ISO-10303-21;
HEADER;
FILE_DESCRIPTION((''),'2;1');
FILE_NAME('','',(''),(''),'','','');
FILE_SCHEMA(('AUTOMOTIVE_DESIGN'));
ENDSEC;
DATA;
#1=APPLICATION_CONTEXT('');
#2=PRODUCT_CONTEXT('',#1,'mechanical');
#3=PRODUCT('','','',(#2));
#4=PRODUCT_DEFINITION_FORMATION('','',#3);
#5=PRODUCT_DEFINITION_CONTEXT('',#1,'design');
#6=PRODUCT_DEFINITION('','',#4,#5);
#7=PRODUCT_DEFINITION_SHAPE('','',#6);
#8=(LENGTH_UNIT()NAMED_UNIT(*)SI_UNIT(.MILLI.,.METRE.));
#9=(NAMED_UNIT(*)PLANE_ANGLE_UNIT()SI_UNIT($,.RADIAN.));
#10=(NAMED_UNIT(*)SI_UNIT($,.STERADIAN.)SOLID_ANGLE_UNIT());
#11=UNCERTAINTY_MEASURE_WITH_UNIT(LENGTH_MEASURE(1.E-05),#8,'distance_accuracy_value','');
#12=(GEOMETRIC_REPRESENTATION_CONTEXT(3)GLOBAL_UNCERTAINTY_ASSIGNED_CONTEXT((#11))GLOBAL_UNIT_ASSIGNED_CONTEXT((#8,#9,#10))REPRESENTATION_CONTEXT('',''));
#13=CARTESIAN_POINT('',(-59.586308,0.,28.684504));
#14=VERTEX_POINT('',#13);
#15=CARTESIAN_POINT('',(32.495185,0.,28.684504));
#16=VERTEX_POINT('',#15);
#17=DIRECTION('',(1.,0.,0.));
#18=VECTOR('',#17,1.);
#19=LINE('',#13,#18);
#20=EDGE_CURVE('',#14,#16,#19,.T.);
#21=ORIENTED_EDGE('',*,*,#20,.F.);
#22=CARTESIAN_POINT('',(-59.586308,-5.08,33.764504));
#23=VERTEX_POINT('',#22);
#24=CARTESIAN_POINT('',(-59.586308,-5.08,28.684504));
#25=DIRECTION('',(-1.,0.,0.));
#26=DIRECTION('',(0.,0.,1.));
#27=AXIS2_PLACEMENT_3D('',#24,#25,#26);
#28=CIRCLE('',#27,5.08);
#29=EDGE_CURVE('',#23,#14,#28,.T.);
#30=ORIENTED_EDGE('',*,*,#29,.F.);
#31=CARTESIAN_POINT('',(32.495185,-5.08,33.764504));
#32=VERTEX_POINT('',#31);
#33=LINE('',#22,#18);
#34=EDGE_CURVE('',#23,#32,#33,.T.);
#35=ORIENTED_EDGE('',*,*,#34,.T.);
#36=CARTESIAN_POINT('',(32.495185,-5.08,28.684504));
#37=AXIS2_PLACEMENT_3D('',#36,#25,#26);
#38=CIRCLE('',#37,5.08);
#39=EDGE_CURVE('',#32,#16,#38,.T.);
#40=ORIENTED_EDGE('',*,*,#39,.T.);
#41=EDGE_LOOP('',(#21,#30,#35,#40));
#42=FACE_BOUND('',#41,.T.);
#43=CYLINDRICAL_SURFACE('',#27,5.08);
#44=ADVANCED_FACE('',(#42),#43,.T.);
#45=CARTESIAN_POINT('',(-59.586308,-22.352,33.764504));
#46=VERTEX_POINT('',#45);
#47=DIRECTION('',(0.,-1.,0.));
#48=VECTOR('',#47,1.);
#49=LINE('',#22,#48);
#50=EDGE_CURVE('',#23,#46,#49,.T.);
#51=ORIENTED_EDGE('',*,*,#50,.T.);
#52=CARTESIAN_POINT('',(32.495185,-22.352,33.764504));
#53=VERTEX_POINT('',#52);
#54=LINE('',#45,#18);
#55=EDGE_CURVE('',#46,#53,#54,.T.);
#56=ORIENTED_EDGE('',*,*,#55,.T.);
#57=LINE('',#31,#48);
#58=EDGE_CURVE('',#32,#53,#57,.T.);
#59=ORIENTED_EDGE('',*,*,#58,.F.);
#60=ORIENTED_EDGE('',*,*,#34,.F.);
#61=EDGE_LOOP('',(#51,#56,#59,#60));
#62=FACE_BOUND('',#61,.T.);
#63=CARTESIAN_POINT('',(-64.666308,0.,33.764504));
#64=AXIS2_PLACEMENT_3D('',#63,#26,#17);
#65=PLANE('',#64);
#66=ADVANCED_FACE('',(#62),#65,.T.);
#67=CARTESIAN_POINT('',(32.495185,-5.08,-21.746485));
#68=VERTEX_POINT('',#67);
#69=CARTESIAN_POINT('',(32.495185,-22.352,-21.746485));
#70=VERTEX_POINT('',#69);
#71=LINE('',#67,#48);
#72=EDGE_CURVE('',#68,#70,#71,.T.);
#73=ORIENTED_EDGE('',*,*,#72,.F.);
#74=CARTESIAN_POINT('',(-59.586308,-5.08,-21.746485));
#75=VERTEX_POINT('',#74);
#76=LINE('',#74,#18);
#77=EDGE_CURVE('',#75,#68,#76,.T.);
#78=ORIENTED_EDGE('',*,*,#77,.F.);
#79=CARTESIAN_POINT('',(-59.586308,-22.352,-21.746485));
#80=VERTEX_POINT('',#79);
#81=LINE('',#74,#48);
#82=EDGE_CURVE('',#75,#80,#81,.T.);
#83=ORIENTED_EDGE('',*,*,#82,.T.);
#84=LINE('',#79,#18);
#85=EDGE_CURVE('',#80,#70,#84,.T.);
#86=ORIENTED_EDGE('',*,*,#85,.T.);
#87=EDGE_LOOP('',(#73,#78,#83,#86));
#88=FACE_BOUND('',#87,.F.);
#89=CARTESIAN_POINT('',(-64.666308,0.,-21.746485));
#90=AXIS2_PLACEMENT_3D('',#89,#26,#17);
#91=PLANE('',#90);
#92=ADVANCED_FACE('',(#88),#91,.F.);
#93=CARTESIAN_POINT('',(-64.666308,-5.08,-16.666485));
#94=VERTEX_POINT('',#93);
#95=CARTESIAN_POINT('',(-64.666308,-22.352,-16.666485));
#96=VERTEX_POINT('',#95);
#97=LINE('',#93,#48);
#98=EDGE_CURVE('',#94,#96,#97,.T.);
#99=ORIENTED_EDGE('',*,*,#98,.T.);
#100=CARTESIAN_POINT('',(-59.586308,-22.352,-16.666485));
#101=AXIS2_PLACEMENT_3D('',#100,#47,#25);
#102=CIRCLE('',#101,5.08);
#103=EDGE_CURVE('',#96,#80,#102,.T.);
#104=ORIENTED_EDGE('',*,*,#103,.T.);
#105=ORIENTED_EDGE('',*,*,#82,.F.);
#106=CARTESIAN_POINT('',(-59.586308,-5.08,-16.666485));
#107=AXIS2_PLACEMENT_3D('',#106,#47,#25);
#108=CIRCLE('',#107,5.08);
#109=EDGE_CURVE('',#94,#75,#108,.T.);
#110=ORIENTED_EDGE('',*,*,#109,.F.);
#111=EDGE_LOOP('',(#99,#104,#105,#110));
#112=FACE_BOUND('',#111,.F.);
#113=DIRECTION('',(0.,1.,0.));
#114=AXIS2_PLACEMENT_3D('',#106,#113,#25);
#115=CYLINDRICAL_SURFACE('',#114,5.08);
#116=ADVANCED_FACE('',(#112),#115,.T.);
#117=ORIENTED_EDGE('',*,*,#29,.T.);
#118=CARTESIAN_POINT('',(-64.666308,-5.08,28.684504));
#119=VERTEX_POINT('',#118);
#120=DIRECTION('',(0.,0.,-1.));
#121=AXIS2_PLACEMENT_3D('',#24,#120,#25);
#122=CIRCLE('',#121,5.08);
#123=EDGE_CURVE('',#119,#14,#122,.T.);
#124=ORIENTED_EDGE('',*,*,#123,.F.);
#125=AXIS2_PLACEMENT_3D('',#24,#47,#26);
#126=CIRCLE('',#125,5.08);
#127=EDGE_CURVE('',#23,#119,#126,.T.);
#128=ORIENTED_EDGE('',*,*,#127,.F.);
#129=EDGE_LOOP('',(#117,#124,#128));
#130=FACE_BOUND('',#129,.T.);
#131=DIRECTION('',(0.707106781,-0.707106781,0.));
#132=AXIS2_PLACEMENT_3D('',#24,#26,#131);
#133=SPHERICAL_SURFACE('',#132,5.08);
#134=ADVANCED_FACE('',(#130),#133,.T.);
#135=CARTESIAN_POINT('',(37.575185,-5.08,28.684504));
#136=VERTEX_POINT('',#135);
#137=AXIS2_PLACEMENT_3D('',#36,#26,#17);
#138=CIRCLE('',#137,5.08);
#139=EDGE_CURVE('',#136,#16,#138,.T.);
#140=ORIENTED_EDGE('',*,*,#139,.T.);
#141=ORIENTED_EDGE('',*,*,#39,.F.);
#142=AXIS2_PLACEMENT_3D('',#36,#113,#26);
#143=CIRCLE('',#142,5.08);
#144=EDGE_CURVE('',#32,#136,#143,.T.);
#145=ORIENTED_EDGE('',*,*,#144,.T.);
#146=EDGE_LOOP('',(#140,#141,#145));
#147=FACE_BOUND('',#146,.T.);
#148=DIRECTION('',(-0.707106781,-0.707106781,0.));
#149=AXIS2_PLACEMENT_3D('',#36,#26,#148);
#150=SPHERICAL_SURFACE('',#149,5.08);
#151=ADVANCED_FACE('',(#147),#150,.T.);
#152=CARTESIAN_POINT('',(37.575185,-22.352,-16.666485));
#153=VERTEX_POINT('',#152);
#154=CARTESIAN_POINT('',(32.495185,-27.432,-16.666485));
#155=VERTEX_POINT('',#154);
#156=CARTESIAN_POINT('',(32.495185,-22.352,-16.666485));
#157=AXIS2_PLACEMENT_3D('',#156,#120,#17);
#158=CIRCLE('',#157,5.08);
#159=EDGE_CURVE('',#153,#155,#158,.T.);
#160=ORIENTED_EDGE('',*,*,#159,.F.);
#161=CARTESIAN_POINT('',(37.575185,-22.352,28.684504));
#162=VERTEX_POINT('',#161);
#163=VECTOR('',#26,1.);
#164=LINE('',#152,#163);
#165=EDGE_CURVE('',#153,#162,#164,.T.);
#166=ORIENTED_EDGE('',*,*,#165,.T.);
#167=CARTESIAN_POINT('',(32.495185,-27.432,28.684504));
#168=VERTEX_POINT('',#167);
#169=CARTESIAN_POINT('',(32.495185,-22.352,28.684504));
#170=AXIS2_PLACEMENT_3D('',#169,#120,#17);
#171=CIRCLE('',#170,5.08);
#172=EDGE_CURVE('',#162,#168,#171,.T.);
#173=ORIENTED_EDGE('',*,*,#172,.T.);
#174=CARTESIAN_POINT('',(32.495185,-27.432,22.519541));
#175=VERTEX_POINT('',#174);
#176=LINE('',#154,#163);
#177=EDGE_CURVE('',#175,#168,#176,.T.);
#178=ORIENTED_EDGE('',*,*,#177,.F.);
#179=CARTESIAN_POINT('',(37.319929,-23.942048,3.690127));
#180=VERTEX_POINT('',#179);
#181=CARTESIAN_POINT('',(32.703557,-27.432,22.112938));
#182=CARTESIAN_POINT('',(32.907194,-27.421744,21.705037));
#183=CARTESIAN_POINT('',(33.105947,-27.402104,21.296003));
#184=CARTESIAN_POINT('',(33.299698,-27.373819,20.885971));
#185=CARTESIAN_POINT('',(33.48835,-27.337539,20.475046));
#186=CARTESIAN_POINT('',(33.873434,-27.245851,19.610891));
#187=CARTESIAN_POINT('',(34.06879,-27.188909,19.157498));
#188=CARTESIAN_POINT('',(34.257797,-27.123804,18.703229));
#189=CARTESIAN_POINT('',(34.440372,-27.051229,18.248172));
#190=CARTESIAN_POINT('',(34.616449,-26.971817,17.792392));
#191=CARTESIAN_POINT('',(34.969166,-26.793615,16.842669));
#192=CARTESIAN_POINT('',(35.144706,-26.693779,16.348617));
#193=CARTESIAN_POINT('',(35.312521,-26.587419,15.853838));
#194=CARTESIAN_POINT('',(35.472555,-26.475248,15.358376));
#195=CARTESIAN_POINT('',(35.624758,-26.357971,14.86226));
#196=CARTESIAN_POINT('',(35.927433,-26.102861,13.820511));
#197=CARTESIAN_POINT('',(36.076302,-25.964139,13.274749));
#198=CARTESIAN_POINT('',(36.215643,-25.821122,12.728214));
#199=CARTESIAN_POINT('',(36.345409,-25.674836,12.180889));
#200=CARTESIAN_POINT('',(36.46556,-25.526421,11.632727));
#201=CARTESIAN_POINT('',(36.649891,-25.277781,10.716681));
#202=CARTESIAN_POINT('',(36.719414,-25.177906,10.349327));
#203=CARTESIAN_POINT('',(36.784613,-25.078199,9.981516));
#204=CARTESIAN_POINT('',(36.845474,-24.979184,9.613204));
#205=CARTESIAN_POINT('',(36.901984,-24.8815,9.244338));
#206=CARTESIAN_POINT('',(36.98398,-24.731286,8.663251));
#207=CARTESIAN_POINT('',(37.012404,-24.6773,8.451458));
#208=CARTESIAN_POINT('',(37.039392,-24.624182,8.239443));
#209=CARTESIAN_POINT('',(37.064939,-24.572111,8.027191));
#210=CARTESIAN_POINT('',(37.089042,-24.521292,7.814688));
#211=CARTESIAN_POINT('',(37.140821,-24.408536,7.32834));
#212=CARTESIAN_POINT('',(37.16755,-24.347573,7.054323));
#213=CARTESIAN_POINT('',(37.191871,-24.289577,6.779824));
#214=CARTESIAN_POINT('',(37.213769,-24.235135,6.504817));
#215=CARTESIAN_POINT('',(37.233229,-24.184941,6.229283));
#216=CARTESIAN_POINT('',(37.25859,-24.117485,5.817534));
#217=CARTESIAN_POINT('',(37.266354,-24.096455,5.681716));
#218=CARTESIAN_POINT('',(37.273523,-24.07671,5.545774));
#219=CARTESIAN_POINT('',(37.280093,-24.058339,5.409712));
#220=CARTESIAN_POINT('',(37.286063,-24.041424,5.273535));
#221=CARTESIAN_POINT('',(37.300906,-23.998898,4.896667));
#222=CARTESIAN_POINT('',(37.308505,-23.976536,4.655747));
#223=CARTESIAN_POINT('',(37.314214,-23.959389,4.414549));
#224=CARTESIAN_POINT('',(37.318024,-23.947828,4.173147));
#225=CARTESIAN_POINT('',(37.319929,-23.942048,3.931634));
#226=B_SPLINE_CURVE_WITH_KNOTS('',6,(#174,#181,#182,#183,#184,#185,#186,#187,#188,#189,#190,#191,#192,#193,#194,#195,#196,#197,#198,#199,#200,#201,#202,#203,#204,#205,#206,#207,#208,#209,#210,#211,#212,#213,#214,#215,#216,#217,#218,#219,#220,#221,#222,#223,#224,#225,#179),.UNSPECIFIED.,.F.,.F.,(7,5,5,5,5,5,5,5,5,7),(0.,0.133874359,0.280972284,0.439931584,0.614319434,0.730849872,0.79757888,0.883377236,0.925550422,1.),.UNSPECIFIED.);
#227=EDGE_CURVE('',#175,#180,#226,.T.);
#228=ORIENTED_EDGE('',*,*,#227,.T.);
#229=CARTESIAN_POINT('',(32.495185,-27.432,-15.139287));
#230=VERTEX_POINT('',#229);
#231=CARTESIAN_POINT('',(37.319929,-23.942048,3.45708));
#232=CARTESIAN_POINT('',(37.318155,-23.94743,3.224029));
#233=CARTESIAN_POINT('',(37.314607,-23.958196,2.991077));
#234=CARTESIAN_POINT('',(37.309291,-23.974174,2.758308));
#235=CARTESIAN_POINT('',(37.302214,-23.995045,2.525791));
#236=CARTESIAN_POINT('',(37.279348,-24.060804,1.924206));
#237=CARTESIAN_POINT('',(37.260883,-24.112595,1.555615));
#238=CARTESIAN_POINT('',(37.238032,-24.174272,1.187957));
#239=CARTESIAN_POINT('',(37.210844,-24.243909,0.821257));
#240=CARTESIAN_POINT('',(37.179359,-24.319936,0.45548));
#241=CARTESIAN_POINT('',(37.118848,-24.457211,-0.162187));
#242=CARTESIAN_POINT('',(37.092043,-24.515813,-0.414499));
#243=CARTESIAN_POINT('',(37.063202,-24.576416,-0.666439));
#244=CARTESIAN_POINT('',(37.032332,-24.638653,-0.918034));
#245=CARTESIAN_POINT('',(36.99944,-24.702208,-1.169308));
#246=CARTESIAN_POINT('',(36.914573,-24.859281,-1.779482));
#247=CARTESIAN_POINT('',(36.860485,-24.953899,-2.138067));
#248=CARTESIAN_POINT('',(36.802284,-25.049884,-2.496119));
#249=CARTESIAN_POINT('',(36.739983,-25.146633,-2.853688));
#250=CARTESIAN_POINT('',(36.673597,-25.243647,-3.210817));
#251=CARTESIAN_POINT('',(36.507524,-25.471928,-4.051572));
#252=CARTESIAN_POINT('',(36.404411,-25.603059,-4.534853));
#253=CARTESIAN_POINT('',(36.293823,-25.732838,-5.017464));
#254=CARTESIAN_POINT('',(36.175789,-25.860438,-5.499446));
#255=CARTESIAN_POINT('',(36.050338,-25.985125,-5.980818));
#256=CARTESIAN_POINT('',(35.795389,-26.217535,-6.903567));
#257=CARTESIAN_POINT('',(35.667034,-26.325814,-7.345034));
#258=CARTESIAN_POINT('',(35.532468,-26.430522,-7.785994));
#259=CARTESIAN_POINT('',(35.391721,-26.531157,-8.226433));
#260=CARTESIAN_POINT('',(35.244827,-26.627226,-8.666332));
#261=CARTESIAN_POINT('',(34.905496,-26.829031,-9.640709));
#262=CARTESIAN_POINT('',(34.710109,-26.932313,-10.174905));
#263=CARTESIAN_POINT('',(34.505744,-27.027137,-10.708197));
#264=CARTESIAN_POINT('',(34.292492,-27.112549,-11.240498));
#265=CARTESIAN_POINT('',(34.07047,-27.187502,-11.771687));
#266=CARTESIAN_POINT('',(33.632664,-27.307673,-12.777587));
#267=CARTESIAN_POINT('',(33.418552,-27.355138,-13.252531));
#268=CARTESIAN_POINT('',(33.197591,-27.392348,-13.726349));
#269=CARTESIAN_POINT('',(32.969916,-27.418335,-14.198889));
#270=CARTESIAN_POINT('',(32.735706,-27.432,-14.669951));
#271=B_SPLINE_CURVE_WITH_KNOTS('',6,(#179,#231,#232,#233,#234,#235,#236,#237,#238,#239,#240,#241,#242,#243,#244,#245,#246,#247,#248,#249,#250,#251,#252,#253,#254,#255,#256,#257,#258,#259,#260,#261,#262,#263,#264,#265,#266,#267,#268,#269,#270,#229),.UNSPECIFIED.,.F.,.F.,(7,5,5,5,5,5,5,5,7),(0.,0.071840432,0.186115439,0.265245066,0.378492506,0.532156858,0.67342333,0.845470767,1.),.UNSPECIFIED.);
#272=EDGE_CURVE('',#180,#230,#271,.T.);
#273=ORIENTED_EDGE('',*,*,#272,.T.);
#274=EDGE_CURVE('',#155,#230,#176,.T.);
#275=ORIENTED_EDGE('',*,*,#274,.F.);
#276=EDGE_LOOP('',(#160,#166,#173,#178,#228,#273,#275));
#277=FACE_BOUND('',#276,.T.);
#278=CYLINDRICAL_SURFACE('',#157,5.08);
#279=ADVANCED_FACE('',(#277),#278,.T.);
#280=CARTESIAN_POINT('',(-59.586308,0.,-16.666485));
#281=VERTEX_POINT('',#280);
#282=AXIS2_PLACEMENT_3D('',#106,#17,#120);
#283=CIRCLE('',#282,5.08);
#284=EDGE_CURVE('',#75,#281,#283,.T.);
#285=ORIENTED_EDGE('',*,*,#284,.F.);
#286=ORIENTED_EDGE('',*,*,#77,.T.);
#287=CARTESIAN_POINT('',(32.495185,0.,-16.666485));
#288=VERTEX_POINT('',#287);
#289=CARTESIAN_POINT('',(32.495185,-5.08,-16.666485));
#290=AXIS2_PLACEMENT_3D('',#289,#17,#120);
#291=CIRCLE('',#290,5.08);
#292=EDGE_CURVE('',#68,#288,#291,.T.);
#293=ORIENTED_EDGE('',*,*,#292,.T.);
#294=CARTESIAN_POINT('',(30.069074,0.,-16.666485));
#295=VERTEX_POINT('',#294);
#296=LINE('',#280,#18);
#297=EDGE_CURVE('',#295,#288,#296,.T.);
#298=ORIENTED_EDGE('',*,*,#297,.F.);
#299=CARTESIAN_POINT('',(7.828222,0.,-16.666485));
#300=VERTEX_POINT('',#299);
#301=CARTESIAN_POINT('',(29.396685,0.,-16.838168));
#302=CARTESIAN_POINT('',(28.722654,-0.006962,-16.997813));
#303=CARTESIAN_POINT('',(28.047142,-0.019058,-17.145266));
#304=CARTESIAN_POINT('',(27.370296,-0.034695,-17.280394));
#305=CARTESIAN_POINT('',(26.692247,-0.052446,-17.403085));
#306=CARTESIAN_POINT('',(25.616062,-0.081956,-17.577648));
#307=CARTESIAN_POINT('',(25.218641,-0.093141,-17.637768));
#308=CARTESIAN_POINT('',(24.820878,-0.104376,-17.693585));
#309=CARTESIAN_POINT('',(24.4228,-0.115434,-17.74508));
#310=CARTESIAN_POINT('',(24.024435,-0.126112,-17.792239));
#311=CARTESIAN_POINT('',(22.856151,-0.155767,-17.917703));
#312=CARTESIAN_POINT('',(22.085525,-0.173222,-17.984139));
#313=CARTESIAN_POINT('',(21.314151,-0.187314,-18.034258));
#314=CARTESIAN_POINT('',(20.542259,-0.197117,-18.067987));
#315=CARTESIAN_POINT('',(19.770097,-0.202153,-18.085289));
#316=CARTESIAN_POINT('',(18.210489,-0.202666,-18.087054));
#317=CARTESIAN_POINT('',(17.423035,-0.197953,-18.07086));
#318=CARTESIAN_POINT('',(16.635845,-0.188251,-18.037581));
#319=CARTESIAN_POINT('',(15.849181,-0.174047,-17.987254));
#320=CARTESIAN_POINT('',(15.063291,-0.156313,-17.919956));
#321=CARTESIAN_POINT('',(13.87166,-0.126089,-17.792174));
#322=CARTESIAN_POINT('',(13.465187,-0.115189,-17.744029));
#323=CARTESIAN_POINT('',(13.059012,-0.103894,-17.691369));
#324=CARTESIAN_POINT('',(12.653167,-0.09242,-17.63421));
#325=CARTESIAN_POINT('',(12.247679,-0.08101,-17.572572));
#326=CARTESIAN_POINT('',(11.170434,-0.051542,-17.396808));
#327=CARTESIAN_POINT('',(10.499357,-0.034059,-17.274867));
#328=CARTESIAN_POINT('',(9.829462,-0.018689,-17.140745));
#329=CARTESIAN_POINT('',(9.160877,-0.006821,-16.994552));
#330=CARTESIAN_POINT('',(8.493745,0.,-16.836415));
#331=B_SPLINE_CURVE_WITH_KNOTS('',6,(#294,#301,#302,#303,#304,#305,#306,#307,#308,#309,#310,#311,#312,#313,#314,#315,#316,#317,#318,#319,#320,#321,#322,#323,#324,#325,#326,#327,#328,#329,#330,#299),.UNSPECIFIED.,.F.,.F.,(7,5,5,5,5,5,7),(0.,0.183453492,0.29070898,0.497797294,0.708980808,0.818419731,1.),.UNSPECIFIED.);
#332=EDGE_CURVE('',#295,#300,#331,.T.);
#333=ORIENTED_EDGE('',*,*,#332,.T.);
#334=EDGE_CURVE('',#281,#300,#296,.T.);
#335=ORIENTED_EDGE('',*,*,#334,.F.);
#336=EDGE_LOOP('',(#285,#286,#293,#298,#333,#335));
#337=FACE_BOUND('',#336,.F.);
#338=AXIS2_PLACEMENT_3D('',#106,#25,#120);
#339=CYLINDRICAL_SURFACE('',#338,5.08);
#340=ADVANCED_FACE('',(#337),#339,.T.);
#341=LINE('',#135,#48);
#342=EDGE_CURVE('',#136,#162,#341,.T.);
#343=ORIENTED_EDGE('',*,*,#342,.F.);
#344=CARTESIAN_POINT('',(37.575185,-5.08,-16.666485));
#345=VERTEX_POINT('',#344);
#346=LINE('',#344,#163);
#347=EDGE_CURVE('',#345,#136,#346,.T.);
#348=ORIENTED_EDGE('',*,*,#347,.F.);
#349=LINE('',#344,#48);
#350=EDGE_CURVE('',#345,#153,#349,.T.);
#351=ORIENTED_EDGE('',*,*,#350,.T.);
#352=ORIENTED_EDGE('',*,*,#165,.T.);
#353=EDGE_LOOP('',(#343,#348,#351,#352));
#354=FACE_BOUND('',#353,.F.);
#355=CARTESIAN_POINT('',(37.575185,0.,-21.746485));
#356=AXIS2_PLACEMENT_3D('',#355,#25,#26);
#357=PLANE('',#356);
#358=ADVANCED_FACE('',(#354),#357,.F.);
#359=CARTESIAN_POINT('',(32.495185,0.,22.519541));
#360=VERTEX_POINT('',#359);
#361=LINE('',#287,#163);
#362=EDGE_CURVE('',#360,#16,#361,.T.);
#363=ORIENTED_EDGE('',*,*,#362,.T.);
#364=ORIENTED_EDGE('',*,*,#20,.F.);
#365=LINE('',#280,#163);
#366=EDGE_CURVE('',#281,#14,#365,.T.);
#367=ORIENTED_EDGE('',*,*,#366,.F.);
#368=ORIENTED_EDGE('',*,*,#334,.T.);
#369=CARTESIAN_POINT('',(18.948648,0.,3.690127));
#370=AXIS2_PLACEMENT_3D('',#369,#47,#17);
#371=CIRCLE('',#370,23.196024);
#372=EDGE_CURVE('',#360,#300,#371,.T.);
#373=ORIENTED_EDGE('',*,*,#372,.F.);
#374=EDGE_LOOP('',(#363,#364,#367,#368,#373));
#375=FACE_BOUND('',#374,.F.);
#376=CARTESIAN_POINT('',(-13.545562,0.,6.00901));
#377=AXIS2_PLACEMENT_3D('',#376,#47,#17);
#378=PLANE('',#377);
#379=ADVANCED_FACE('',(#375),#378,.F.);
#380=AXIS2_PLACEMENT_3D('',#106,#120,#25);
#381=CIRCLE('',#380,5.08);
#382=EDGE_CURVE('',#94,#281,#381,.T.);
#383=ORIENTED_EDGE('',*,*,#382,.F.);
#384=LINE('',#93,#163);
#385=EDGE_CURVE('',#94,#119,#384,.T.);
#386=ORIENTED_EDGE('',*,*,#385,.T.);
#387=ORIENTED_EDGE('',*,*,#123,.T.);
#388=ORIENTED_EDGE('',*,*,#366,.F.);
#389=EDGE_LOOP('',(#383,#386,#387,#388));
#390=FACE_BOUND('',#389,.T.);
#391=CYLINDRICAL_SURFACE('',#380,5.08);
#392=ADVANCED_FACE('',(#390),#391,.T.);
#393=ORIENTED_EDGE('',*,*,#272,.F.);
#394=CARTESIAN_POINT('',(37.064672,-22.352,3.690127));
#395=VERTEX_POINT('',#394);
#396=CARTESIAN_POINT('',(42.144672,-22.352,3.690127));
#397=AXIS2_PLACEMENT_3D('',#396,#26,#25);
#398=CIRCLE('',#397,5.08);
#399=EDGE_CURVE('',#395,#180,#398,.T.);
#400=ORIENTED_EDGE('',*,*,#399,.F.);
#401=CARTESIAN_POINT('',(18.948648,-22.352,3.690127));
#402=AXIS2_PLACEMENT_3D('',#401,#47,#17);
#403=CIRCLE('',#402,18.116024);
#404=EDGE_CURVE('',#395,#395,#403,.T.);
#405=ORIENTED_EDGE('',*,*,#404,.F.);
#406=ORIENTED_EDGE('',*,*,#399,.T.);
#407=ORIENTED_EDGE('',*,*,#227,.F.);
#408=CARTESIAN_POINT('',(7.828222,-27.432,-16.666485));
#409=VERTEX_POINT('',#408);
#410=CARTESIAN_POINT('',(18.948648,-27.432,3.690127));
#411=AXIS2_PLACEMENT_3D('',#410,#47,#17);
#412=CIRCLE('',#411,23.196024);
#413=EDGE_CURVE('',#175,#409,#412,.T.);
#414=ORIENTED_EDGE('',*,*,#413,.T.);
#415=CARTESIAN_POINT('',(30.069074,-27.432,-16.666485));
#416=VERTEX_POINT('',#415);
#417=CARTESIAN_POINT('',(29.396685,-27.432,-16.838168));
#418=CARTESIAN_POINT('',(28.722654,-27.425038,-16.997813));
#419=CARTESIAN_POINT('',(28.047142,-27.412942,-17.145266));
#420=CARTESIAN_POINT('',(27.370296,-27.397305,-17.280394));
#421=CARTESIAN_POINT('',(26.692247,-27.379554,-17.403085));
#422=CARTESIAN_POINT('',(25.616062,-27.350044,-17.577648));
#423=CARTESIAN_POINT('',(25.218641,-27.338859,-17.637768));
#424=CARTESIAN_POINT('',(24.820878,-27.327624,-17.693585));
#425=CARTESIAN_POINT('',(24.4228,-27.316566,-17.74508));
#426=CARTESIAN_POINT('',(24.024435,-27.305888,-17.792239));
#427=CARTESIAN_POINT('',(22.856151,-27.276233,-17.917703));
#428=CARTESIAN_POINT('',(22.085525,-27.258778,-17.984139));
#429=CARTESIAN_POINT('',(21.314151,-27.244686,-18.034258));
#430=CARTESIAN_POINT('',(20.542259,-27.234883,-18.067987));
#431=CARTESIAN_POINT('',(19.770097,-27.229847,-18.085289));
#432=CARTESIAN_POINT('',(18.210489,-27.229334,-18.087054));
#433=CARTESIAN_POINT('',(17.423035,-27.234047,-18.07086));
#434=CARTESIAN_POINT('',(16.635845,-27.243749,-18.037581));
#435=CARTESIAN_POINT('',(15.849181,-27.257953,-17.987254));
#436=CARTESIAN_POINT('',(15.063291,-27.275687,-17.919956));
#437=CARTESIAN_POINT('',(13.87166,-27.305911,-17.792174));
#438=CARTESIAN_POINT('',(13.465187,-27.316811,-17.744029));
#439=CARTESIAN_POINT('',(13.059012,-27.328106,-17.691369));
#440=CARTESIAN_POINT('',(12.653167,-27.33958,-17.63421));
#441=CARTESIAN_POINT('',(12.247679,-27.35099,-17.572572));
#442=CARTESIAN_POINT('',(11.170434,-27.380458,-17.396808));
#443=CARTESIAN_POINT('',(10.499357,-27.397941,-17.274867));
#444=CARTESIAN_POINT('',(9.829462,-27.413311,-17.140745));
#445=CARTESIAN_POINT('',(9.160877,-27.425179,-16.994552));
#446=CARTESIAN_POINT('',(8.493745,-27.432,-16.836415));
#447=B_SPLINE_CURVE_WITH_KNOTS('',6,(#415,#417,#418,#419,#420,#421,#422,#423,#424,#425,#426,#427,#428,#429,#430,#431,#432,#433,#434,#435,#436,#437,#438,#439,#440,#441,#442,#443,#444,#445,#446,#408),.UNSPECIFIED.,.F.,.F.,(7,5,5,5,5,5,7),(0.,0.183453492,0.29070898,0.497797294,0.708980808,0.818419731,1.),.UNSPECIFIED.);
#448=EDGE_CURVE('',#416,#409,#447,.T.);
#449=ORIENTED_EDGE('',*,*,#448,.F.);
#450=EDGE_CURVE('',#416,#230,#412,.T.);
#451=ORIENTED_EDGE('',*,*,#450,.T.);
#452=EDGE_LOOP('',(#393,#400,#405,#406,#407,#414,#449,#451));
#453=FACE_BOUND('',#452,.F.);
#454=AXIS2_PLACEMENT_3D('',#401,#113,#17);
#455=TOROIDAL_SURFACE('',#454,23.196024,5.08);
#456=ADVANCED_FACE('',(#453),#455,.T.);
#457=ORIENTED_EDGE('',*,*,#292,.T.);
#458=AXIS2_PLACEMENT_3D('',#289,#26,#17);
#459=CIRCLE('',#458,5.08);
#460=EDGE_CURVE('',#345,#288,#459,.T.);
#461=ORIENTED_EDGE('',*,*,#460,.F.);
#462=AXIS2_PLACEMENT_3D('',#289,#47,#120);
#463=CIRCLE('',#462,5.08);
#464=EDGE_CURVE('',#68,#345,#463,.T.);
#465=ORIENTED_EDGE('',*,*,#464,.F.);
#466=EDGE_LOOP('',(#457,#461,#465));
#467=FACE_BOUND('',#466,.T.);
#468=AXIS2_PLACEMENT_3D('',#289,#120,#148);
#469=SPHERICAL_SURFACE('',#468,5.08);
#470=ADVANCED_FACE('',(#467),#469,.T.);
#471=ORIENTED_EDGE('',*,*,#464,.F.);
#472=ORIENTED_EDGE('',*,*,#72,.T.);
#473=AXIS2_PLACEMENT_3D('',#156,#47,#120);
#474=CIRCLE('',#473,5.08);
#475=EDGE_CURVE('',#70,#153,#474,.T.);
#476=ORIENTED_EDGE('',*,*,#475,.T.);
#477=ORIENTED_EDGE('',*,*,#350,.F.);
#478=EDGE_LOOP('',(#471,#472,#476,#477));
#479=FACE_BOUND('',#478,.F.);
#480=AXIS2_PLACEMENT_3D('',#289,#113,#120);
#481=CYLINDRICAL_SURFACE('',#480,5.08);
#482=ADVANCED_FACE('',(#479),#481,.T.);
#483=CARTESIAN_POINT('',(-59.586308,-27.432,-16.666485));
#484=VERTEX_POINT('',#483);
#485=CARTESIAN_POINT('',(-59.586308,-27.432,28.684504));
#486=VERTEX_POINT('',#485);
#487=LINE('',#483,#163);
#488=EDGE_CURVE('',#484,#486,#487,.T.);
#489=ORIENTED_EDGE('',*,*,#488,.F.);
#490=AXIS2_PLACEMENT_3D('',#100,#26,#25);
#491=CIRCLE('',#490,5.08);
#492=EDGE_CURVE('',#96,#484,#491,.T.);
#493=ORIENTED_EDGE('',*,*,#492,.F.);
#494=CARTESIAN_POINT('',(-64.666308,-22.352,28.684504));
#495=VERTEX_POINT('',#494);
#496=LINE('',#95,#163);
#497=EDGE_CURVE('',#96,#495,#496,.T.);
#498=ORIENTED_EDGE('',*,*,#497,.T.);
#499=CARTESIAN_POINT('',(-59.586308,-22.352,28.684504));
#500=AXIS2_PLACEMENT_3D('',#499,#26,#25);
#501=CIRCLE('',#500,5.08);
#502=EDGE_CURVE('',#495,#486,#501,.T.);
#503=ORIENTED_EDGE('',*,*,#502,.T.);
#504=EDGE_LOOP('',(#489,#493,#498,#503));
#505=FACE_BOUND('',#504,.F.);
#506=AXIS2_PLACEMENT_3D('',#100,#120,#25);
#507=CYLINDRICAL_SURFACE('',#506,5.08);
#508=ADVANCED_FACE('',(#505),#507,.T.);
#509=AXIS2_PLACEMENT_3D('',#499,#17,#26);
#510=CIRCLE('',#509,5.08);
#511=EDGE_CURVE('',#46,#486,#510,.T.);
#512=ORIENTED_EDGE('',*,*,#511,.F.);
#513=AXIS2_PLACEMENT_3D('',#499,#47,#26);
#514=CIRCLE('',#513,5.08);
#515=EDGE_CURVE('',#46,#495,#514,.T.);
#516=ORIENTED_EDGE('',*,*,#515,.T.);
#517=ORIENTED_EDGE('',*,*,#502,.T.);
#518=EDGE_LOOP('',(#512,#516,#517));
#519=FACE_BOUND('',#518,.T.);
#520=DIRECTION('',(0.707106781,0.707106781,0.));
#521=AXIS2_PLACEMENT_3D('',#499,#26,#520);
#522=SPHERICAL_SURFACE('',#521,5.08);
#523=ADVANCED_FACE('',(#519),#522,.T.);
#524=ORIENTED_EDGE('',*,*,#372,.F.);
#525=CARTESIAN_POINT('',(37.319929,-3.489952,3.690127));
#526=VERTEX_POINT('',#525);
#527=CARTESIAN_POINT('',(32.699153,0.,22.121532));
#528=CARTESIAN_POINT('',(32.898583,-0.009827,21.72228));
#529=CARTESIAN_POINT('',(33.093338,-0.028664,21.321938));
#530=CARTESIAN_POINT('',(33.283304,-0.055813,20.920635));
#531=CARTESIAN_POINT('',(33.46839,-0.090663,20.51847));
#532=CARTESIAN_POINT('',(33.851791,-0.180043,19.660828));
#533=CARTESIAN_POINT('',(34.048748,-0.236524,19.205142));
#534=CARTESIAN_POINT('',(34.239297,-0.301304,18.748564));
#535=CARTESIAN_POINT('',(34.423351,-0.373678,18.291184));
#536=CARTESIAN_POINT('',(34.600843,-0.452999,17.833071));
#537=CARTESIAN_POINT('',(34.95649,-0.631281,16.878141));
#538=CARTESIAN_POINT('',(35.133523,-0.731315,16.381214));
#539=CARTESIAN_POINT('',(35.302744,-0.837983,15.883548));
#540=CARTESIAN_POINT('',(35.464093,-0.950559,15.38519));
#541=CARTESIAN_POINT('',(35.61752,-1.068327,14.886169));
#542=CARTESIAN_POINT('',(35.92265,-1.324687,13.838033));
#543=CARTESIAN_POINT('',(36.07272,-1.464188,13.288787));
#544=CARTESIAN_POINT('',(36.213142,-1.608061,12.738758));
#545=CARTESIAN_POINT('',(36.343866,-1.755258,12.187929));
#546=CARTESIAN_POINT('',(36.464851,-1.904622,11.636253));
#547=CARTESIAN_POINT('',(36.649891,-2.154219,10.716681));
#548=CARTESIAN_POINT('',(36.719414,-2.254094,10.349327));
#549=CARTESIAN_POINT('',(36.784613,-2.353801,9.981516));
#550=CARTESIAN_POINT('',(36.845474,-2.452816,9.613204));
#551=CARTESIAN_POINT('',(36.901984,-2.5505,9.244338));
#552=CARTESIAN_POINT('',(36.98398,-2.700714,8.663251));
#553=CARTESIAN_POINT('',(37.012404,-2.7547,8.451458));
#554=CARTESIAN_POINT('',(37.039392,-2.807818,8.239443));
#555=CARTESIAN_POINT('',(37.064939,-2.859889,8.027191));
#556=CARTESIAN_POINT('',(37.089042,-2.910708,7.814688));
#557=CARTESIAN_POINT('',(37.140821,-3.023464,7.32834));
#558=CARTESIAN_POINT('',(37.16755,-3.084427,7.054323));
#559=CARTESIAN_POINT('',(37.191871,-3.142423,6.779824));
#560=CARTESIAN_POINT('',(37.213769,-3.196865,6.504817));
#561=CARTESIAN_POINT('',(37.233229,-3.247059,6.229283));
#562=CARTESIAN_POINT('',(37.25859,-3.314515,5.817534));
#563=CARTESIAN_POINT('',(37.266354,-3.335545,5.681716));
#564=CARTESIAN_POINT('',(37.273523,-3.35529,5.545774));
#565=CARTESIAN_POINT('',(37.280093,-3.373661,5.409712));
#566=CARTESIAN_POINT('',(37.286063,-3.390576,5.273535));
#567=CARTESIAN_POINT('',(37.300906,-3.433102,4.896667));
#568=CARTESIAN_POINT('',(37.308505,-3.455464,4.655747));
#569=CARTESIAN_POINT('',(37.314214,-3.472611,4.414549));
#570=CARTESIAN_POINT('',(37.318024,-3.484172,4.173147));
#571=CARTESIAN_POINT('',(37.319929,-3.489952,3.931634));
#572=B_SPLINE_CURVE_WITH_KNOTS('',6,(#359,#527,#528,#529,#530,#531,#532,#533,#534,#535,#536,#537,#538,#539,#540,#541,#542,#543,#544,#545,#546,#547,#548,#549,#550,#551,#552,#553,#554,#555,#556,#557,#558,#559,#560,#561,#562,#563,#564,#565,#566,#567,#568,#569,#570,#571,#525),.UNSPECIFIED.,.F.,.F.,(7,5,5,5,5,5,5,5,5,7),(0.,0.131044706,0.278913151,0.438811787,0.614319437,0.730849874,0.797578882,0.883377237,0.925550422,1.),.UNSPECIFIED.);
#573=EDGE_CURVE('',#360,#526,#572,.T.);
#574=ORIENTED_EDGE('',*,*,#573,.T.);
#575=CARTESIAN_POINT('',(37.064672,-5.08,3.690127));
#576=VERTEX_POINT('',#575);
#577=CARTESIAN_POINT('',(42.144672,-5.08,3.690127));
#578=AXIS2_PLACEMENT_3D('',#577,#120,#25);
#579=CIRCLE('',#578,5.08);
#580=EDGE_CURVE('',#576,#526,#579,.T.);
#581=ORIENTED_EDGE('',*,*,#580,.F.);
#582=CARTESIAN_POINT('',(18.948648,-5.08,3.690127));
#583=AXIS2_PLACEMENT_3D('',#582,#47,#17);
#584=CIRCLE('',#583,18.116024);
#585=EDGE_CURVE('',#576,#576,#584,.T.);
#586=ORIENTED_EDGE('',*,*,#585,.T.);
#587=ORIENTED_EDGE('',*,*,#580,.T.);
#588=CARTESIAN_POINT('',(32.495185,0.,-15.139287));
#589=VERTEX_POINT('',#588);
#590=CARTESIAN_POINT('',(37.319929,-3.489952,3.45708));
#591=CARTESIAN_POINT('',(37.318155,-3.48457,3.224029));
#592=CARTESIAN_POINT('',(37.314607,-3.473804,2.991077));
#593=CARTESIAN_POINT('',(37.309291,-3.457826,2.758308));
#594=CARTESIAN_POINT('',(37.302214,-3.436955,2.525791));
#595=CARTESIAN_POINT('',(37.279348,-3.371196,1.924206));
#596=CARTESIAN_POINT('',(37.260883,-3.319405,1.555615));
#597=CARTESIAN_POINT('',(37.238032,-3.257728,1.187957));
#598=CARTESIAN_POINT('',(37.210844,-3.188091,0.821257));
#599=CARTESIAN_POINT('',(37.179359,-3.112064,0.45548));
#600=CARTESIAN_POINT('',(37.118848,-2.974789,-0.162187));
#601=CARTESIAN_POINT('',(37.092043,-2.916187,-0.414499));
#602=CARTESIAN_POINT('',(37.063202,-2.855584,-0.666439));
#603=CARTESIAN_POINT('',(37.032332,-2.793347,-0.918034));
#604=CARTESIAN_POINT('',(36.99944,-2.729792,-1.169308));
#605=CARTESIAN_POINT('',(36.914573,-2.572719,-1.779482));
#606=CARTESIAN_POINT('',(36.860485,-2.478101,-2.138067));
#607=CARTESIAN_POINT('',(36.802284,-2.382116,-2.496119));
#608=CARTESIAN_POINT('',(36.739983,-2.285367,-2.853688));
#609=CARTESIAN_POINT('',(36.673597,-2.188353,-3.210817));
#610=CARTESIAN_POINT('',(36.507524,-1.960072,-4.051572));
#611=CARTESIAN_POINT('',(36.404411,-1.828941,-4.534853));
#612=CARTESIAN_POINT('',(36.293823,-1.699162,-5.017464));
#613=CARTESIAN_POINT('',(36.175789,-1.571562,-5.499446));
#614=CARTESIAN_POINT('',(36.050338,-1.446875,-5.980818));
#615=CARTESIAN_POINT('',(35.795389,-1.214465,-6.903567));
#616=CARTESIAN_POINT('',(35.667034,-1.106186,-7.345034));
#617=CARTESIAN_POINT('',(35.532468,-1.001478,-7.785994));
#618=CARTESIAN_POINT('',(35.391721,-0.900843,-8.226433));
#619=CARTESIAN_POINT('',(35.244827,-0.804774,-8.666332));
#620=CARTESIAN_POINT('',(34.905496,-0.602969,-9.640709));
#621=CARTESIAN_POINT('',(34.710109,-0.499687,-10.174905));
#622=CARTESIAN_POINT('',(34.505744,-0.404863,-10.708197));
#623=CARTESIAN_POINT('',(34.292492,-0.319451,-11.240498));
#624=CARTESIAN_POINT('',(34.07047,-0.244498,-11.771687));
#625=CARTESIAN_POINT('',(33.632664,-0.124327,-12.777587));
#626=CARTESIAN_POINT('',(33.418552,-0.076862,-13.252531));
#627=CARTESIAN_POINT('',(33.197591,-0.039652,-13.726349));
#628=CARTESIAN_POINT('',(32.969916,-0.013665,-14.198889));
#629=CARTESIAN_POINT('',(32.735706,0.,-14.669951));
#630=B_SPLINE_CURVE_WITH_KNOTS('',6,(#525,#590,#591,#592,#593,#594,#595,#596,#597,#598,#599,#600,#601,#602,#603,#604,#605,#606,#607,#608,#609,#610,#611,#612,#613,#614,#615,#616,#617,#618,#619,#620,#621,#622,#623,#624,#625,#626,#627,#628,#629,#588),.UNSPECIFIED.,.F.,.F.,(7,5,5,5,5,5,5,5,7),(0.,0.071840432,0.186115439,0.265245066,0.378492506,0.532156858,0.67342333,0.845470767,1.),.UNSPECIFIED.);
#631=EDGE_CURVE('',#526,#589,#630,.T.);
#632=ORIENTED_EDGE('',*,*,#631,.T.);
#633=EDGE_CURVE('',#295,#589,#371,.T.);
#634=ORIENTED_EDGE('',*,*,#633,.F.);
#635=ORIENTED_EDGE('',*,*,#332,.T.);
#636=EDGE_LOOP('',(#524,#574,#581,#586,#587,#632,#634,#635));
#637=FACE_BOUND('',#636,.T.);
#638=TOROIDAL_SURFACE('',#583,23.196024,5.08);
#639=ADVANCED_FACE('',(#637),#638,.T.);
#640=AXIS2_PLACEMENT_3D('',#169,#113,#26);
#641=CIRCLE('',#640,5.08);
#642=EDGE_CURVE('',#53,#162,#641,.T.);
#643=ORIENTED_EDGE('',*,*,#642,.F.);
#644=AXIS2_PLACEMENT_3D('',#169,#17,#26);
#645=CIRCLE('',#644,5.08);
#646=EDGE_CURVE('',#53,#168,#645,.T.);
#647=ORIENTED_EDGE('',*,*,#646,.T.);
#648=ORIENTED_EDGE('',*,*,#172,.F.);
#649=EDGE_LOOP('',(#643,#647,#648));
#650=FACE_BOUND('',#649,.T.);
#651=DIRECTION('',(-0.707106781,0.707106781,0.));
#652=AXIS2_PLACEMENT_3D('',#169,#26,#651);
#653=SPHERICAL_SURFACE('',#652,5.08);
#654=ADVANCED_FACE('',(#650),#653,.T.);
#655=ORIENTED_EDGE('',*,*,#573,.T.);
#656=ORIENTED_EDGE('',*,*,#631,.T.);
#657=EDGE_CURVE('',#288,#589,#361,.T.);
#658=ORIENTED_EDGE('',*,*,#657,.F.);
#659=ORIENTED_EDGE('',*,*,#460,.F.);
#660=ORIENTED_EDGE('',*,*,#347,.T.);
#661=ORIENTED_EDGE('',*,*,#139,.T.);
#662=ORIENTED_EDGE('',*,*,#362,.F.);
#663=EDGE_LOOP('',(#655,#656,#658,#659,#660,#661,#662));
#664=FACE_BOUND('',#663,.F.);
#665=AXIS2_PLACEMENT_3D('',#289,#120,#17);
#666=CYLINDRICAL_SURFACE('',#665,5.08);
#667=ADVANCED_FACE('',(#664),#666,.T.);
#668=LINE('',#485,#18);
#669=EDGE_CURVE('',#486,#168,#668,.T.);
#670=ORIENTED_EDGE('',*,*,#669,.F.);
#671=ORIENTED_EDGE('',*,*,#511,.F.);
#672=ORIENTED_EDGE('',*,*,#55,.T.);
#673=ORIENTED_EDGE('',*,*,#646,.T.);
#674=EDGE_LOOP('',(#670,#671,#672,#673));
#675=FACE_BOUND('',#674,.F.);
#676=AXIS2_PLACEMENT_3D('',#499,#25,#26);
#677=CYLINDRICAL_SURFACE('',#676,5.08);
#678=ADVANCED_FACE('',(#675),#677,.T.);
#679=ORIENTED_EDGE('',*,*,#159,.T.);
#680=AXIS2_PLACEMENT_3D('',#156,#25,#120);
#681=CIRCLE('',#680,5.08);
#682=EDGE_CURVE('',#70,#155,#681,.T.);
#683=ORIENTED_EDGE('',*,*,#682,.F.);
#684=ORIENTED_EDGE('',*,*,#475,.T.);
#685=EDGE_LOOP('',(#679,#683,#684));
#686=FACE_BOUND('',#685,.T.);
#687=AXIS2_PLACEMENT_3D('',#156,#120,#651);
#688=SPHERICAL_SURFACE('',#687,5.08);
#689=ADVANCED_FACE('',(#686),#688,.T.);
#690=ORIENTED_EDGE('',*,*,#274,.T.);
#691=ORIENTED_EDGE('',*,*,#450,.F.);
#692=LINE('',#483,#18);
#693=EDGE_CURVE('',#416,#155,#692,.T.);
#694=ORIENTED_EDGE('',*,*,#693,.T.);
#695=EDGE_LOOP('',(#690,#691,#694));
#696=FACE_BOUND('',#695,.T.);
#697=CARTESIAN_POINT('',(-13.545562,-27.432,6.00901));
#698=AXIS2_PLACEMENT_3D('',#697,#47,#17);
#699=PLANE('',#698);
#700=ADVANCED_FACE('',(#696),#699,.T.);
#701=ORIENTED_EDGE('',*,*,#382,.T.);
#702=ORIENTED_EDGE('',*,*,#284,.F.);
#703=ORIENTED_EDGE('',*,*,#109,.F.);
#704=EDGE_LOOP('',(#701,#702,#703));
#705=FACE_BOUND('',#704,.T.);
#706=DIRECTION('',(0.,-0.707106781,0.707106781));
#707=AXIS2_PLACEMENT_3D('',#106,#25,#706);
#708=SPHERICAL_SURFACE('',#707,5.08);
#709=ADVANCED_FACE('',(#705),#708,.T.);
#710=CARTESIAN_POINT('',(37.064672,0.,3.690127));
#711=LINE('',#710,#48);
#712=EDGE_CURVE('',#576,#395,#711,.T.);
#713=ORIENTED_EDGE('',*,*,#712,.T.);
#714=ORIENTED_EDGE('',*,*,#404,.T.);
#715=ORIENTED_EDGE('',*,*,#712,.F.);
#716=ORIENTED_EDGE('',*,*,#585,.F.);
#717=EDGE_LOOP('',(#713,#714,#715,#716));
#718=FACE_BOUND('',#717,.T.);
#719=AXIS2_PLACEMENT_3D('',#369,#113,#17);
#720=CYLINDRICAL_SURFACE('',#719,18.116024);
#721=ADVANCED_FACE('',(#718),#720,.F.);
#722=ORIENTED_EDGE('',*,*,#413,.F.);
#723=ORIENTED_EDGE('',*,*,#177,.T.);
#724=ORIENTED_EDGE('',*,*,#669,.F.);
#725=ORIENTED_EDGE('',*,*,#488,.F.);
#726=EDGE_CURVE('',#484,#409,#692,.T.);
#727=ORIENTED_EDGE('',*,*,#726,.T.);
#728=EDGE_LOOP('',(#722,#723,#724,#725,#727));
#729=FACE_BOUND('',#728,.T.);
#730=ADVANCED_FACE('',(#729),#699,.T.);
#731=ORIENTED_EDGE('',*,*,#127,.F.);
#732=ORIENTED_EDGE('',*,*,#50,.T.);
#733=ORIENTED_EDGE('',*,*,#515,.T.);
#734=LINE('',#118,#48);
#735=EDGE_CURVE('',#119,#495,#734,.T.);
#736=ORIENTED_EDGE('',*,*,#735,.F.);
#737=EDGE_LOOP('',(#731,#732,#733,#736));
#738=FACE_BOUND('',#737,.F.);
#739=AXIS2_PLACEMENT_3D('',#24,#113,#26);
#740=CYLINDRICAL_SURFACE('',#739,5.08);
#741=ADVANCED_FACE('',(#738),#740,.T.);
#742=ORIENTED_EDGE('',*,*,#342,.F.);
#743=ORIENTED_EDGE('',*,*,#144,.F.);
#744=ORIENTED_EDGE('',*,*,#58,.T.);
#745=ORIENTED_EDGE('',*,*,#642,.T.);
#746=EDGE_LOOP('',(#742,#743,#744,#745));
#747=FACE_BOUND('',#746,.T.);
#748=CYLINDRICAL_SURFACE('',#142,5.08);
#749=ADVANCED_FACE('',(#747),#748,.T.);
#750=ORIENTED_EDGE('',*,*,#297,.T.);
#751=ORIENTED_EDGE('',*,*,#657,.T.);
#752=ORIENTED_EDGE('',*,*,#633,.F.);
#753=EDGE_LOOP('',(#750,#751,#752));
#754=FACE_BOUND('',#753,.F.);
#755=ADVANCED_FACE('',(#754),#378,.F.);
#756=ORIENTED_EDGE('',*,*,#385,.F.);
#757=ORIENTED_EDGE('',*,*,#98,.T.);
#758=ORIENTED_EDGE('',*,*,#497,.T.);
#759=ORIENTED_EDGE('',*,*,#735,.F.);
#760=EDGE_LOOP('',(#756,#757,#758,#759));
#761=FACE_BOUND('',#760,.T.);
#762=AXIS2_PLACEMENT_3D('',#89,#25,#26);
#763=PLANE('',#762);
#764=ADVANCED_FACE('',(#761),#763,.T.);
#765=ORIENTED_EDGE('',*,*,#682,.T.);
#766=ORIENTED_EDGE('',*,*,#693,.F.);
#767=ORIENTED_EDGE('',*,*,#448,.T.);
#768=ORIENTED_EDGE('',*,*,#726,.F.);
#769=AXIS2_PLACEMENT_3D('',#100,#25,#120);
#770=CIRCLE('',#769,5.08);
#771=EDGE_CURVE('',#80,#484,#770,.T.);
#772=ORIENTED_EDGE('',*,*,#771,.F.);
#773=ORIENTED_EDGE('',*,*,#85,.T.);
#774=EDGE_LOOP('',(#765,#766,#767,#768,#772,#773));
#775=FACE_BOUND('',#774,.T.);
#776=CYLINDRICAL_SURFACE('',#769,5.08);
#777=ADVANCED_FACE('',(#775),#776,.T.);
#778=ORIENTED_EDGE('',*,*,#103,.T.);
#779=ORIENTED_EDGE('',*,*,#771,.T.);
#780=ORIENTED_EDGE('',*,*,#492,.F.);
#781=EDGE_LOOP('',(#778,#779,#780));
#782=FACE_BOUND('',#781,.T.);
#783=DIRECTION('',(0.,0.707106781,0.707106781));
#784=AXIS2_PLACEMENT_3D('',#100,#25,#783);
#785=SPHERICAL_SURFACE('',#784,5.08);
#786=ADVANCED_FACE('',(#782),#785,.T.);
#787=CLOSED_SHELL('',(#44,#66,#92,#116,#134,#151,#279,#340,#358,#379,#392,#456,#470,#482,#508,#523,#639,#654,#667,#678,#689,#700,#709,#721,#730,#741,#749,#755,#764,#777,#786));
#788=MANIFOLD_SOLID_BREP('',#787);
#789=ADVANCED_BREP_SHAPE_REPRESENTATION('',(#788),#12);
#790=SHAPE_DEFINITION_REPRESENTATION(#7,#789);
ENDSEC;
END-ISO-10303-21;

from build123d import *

# Parameters (mm, degrees)
F0_W         = 102.2414937615
F0_H         = 55.510988459
F0_R         = 18.1160237287
F1_DEPTH     = 27.432
F2_T1_DEPTH  = 92.0814937615
F2_T3_DEPTH  = 45.350988459
F2_T5_DEPTH  = 17.272
F2_S9_W      = 5.08
F2_S9_H      = 5.08
F2_T10_DEPTH = 5.08
F2_S15_W     = 5.08
F2_S15_H     = 5.08
F2_T16_DEPTH = 5.08
F2_S21_W     = 5.08
F2_S21_H     = 5.08
F2_T22_DEPTH = 5.08
F2_S27_W     = 5.08
F2_S27_H     = 5.08
F2_T28_DEPTH = 5.08
F2_S33_W     = 5.08
F2_S33_H     = 5.08
F2_T34_DEPTH = 5.08
F2_S39_W     = 5.08
F2_S39_H     = 5.08
F2_T40_DEPTH = 5.08
F2_S45_W     = 5.08
F2_S45_H     = 5.08
F2_T46_DEPTH = 5.08
F2_S51_W     = 5.08
F2_S51_H     = 5.08
F2_T52_DEPTH = 5.08


# Not quite as in the source:
# - a fillet or chamfer that OpenCascade refuses, or shapes differently, is made with other operations: its cross-section is extruded or revolved along the edge and cut away or added


with BuildPart() as f1:
    # F0 (on Front) → F1 (new body)
    with BuildSketch(Plane.XZ):
        with Locations((-13.5455615819, 6.0090096667)):
            Rectangle(F0_W, F0_H)
        with Locations((18.9486481249, 3.6901270505)):
            Circle(F0_R, mode=Mode.SUBTRACT)
    extrude(amount=F1_DEPTH)

    # F2: fillet of radius 5.08 on 15 edges, made by hand

    # F2_s2 → F2_t1 (cut)
    with BuildSketch(Plane.YZ.offset(-59.5863084626)):
        with BuildLine():
            ThreePointArc((-22.352, 33.7645038962), (-25.9441024484, 32.2766063447), (-27.432, 28.6845038962))
            Line((-27.432, 28.6845038962), (-27.432, 33.7645038962))
            Line((-27.432, 33.7645038962), (-22.352, 33.7645038962))
        make_face()
        with BuildLine():
            ThreePointArc((-22.352, -21.7464845628), (-25.9441024484, -20.2585870112), (-27.432, -16.6664845628))
            Line((-27.432, -16.6664845628), (-27.432, -21.7464845628))
            Line((-27.432, -21.7464845628), (-22.352, -21.7464845628))
        make_face()
        with BuildLine():
            ThreePointArc((-5.08, -21.7464845628), (-1.4878975516, -20.2585870112), (0, -16.6664845628))
            Line((0, -16.6664845628), (0, -21.7464845628))
            Line((0, -21.7464845628), (-5.08, -21.7464845628))
        make_face()
        with BuildLine():
            ThreePointArc((-5.08, 33.7645038962), (-1.4878975516, 32.2766063447), (0, 28.6845038962))
            Line((0, 28.6845038962), (0, 33.7645038962))
            Line((0, 33.7645038962), (-5.08, 33.7645038962))
        make_face()
    extrude(amount=F2_T1_DEPTH, mode=Mode.SUBTRACT)

    # F2_s4 → F2_t3 (cut)
    with BuildSketch(Plane.XY.offset(-16.6664845628)):
        with BuildLine():
            ThreePointArc((-64.6663084626, -22.352), (-63.178410911, -25.9441024484), (-59.5863084626, -27.432))
            Line((-59.5863084626, -27.432), (-64.6663084626, -27.432))
            Line((-64.6663084626, -27.432), (-64.6663084626, -22.352))
        make_face()
        with BuildLine():
            ThreePointArc((37.5751852989, -22.352), (36.0872877473, -25.9441024484), (32.4951852989, -27.432))
            Line((32.4951852989, -27.432), (37.5751852989, -27.432))
            Line((37.5751852989, -27.432), (37.5751852989, -22.352))
        make_face()
        with BuildLine():
            ThreePointArc((-64.6663084626, -5.08), (-63.178410911, -1.4878975516), (-59.5863084626, 0))
            Line((-59.5863084626, 0), (-64.6663084626, 0))
            Line((-64.6663084626, 0), (-64.6663084626, -5.08))
        make_face()
        with BuildLine():
            ThreePointArc((37.5751852989, -5.08), (36.0872877473, -1.4878975516), (32.4951852989, 0))
            Line((32.4951852989, 0), (37.5751852989, 0))
            Line((37.5751852989, 0), (37.5751852989, -5.08))
        make_face()
    extrude(amount=F2_T3_DEPTH, mode=Mode.SUBTRACT)

    # F2_s6 → F2_t5 (cut)
    with BuildSketch(Plane.XZ.offset(5.08)):
        with BuildLine():
            ThreePointArc((-64.6663084626, -16.6664845628), (-63.178410911, -20.2585870112), (-59.5863084626, -21.7464845628))
            Line((-59.5863084626, -21.7464845628), (-64.6663084626, -21.7464845628))
            Line((-64.6663084626, -21.7464845628), (-64.6663084626, -16.6664845628))
        make_face()
        with BuildLine():
            ThreePointArc((32.4951852989, -21.7464845628), (36.0872877473, -20.2585870112), (37.5751852989, -16.6664845628))
            Line((37.5751852989, -16.6664845628), (37.5751852989, -21.7464845628))
            Line((37.5751852989, -21.7464845628), (32.4951852989, -21.7464845628))
        make_face()
        with BuildLine():
            ThreePointArc((-59.5863084626, 33.7645038962), (-63.178410911, 32.2766063447), (-64.6663084626, 28.6845038962))
            Line((-64.6663084626, 28.6845038962), (-64.6663084626, 33.7645038962))
            Line((-64.6663084626, 33.7645038962), (-59.5863084626, 33.7645038962))
        make_face()
        with BuildLine():
            ThreePointArc((32.4951852989, 33.7645038962), (36.0872877473, 32.2766063447), (37.5751852989, 28.6845038962))
            Line((37.5751852989, 28.6845038962), (37.5751852989, 33.7645038962))
            Line((37.5751852989, 33.7645038962), (32.4951852989, 33.7645038962))
        make_face()
    extrude(amount=F2_T5_DEPTH, mode=Mode.SUBTRACT)


with BuildPart() as f2_tool8:
    # F2_s9 → F2_t10 (new body)
    with BuildSketch(Plane.XY.offset(28.6845038962)):
        with Locations((35.0351852989, -24.892)):
            Rectangle(F2_S9_W, F2_S9_H)
    extrude(amount=F2_T10_DEPTH)

    # F2_s11 → F2_t12 (revolve, cut)
    with BuildSketch(Plane(origin=(32.4951852989, -22.352, 28.6845038962), x_dir=(-0.7071067812, 0.7071067812, 0), z_dir=(0.7071067812, 0.7071067812, 0))):
        with BuildLine():
            ThreePointArc((0, -5.08), (5.08, 0), (0, 5.08))
            Line((0, 5.08), (0, -5.08))
        make_face()
    revolve(axis=Axis((32.4951852989, -22.352, 28.6845038962), (0, 0, 1)), mode=Mode.SUBTRACT)


with BuildPart() as f1_1:
    add(f1.part)

    # F2_t7: cut F2_tool8
    add(f2_tool8.part, mode=Mode.SUBTRACT)


with BuildPart() as f2_tool14:
    # F2_s15 → F2_t16 (new body)
    with BuildSketch(Plane.XY.offset(28.6845038962)):
        with Locations((-62.1263084626, -24.892)):
            Rectangle(F2_S15_W, F2_S15_H)
    extrude(amount=F2_T16_DEPTH)

    # F2_s17 → F2_t18 (revolve, cut)
    with BuildSketch(Plane(origin=(-59.5863084626, -22.352, 28.6845038962), x_dir=(0.7071067812, 0.7071067812, 0), z_dir=(0.7071067812, -0.7071067812, 0))):
        with BuildLine():
            ThreePointArc((0, -5.08), (5.08, 0), (0, 5.08))
            Line((0, 5.08), (0, -5.08))
        make_face()
    revolve(axis=Axis((-59.5863084626, -22.352, 28.6845038962), (0, 0, 1)), mode=Mode.SUBTRACT)


with BuildPart() as f1_2:
    add(f1_1.part)

    # F2_t13: cut F2_tool14
    add(f2_tool14.part, mode=Mode.SUBTRACT)


with BuildPart() as f2_tool20:
    # F2_s21 → F2_t22 (new body)
    with BuildSketch(Plane.YZ.offset(-59.5863084626)):
        with Locations((-24.892, -19.2064845628)):
            Rectangle(F2_S21_W, F2_S21_H)
    extrude(amount=-F2_T22_DEPTH)

    # F2_s23 → F2_t24 (revolve, cut)
    with BuildSketch(Plane(origin=(-59.5863084626, -22.352, -16.6664845628), x_dir=(0, 0.7071067812, 0.7071067812), z_dir=(0, -0.7071067812, 0.7071067812))):
        with BuildLine():
            ThreePointArc((0, -5.08), (5.08, 0), (0, 5.08))
            Line((0, 5.08), (0, -5.08))
        make_face()
    revolve(axis=Axis((-59.5863084626, -22.352, -16.6664845628), (-1, 0, 0)), mode=Mode.SUBTRACT)


with BuildPart() as f1_3:
    add(f1_2.part)

    # F2_t19: cut F2_tool20
    add(f2_tool20.part, mode=Mode.SUBTRACT)


with BuildPart() as f2_tool26:
    # F2_s27 → F2_t28 (new body)
    with BuildSketch(Plane.XY.offset(-16.6664845628)):
        with Locations((35.0351852989, -24.892)):
            Rectangle(F2_S27_W, F2_S27_H)
    extrude(amount=-F2_T28_DEPTH)

    # F2_s29 → F2_t30 (revolve, cut)
    with BuildSketch(Plane(origin=(32.4951852989, -22.352, -16.6664845628), x_dir=(-0.7071067812, 0.7071067812, 0), z_dir=(-0.7071067812, -0.7071067812, 0))):
        with BuildLine():
            ThreePointArc((0, -5.08), (5.08, 0), (0, 5.08))
            Line((0, 5.08), (0, -5.08))
        make_face()
    revolve(axis=Axis((32.4951852989, -22.352, -16.6664845628), (0, 0, -1)), mode=Mode.SUBTRACT)


with BuildPart() as f1_4:
    add(f1_3.part)

    # F2_t25: cut F2_tool26
    add(f2_tool26.part, mode=Mode.SUBTRACT)


with BuildPart() as f2_tool32:
    # F2_s33 → F2_t34 (new body)
    with BuildSketch(Plane.YZ.offset(-59.5863084626)):
        with Locations((-2.54, -19.2064845628)):
            Rectangle(F2_S33_W, F2_S33_H)
    extrude(amount=-F2_T34_DEPTH)

    # F2_s35 → F2_t36 (revolve, cut)
    with BuildSketch(Plane(origin=(-59.5863084626, -5.08, -16.6664845628), x_dir=(0, -0.7071067812, 0.7071067812), z_dir=(0, -0.7071067812, -0.7071067812))):
        with BuildLine():
            ThreePointArc((0, -5.08), (5.08, 0), (0, 5.08))
            Line((0, 5.08), (0, -5.08))
        make_face()
    revolve(axis=Axis((-59.5863084626, -5.08, -16.6664845628), (-1, 0, 0)), mode=Mode.SUBTRACT)


with BuildPart() as f1_5:
    add(f1_4.part)

    # F2_t31: cut F2_tool32
    add(f2_tool32.part, mode=Mode.SUBTRACT)


with BuildPart() as f2_tool38:
    # F2_s39 → F2_t40 (new body)
    with BuildSketch(Plane.XY.offset(-16.6664845628)):
        with Locations((35.0351852989, -2.54)):
            Rectangle(F2_S39_W, F2_S39_H)
    extrude(amount=-F2_T40_DEPTH)

    # F2_s41 → F2_t42 (revolve, cut)
    with BuildSketch(Plane(origin=(32.4951852989, -5.08, -16.6664845628), x_dir=(-0.7071067812, -0.7071067812, 0), z_dir=(0.7071067812, -0.7071067812, 0))):
        with BuildLine():
            ThreePointArc((0, -5.08), (5.08, 0), (0, 5.08))
            Line((0, 5.08), (0, -5.08))
        make_face()
    revolve(axis=Axis((32.4951852989, -5.08, -16.6664845628), (0, 0, -1)), mode=Mode.SUBTRACT)


with BuildPart() as f1_6:
    add(f1_5.part)

    # F2_t37: cut F2_tool38
    add(f2_tool38.part, mode=Mode.SUBTRACT)


with BuildPart() as f2_tool44:
    # F2_s45 → F2_t46 (new body)
    with BuildSketch(Plane.XY.offset(28.6845038962)):
        with Locations((35.0351852989, -2.54)):
            Rectangle(F2_S45_W, F2_S45_H)
    extrude(amount=F2_T46_DEPTH)

    # F2_s47 → F2_t48 (revolve, cut)
    with BuildSketch(Plane(origin=(32.4951852989, -5.08, 28.6845038962), x_dir=(-0.7071067812, -0.7071067812, 0), z_dir=(-0.7071067812, 0.7071067812, 0))):
        with BuildLine():
            ThreePointArc((0, -5.08), (5.08, 0), (0, 5.08))
            Line((0, 5.08), (0, -5.08))
        make_face()
    revolve(axis=Axis((32.4951852989, -5.08, 28.6845038962), (0, 0, 1)), mode=Mode.SUBTRACT)


with BuildPart() as f1_7:
    add(f1_6.part)

    # F2_t43: cut F2_tool44
    add(f2_tool44.part, mode=Mode.SUBTRACT)


with BuildPart() as f2_tool50:
    # F2_s51 → F2_t52 (new body)
    with BuildSketch(Plane.XY.offset(28.6845038962)):
        with Locations((-62.1263084626, -2.54)):
            Rectangle(F2_S51_W, F2_S51_H)
    extrude(amount=F2_T52_DEPTH)

    # F2_s53 → F2_t54 (revolve, cut)
    with BuildSketch(Plane(origin=(-59.5863084626, -5.08, 28.6845038962), x_dir=(0.7071067812, -0.7071067812, 0), z_dir=(-0.7071067812, -0.7071067812, 0))):
        with BuildLine():
            ThreePointArc((0, -5.08), (5.08, 0), (0, 5.08))
            Line((0, 5.08), (0, -5.08))
        make_face()
    revolve(axis=Axis((-59.5863084626, -5.08, 28.6845038962), (0, 0, 1)), mode=Mode.SUBTRACT)


with BuildPart() as f1_8:
    add(f1_7.part)

    # F2_t49: cut F2_tool50
    add(f2_tool50.part, mode=Mode.SUBTRACT)

    # F2_s55 → F2_t56 (revolve, cut)
    with BuildSketch(Plane.XY.offset(3.6901270505)):
        with BuildLine():
            ThreePointArc((37.0646718537, -22.352), (38.5525694052, -25.9441024484), (42.1446718537, -27.432))
            Line((42.1446718537, -27.432), (37.0646718537, -27.432))
            Line((37.0646718537, -27.432), (37.0646718537, -22.352))
        make_face()
    revolve(axis=Axis((18.9486481249, -27.432, 3.6901270505), (0, -1, 0)), mode=Mode.SUBTRACT)

    # F2_s57 → F2_t58 (revolve, cut)
    with BuildSketch(Plane.XY.offset(3.6901270505)):
        with BuildLine():
            ThreePointArc((37.0646718537, -5.08), (38.5525694052, -1.4878975516), (42.1446718537, 0))
            Line((42.1446718537, 0), (37.0646718537, 0))
            Line((37.0646718537, 0), (37.0646718537, -5.08))
        make_face()
    revolve(axis=Axis((18.9486481249, 0, 3.6901270505), (0, -1, 0)), mode=Mode.SUBTRACT)


solid = f1_8.part
